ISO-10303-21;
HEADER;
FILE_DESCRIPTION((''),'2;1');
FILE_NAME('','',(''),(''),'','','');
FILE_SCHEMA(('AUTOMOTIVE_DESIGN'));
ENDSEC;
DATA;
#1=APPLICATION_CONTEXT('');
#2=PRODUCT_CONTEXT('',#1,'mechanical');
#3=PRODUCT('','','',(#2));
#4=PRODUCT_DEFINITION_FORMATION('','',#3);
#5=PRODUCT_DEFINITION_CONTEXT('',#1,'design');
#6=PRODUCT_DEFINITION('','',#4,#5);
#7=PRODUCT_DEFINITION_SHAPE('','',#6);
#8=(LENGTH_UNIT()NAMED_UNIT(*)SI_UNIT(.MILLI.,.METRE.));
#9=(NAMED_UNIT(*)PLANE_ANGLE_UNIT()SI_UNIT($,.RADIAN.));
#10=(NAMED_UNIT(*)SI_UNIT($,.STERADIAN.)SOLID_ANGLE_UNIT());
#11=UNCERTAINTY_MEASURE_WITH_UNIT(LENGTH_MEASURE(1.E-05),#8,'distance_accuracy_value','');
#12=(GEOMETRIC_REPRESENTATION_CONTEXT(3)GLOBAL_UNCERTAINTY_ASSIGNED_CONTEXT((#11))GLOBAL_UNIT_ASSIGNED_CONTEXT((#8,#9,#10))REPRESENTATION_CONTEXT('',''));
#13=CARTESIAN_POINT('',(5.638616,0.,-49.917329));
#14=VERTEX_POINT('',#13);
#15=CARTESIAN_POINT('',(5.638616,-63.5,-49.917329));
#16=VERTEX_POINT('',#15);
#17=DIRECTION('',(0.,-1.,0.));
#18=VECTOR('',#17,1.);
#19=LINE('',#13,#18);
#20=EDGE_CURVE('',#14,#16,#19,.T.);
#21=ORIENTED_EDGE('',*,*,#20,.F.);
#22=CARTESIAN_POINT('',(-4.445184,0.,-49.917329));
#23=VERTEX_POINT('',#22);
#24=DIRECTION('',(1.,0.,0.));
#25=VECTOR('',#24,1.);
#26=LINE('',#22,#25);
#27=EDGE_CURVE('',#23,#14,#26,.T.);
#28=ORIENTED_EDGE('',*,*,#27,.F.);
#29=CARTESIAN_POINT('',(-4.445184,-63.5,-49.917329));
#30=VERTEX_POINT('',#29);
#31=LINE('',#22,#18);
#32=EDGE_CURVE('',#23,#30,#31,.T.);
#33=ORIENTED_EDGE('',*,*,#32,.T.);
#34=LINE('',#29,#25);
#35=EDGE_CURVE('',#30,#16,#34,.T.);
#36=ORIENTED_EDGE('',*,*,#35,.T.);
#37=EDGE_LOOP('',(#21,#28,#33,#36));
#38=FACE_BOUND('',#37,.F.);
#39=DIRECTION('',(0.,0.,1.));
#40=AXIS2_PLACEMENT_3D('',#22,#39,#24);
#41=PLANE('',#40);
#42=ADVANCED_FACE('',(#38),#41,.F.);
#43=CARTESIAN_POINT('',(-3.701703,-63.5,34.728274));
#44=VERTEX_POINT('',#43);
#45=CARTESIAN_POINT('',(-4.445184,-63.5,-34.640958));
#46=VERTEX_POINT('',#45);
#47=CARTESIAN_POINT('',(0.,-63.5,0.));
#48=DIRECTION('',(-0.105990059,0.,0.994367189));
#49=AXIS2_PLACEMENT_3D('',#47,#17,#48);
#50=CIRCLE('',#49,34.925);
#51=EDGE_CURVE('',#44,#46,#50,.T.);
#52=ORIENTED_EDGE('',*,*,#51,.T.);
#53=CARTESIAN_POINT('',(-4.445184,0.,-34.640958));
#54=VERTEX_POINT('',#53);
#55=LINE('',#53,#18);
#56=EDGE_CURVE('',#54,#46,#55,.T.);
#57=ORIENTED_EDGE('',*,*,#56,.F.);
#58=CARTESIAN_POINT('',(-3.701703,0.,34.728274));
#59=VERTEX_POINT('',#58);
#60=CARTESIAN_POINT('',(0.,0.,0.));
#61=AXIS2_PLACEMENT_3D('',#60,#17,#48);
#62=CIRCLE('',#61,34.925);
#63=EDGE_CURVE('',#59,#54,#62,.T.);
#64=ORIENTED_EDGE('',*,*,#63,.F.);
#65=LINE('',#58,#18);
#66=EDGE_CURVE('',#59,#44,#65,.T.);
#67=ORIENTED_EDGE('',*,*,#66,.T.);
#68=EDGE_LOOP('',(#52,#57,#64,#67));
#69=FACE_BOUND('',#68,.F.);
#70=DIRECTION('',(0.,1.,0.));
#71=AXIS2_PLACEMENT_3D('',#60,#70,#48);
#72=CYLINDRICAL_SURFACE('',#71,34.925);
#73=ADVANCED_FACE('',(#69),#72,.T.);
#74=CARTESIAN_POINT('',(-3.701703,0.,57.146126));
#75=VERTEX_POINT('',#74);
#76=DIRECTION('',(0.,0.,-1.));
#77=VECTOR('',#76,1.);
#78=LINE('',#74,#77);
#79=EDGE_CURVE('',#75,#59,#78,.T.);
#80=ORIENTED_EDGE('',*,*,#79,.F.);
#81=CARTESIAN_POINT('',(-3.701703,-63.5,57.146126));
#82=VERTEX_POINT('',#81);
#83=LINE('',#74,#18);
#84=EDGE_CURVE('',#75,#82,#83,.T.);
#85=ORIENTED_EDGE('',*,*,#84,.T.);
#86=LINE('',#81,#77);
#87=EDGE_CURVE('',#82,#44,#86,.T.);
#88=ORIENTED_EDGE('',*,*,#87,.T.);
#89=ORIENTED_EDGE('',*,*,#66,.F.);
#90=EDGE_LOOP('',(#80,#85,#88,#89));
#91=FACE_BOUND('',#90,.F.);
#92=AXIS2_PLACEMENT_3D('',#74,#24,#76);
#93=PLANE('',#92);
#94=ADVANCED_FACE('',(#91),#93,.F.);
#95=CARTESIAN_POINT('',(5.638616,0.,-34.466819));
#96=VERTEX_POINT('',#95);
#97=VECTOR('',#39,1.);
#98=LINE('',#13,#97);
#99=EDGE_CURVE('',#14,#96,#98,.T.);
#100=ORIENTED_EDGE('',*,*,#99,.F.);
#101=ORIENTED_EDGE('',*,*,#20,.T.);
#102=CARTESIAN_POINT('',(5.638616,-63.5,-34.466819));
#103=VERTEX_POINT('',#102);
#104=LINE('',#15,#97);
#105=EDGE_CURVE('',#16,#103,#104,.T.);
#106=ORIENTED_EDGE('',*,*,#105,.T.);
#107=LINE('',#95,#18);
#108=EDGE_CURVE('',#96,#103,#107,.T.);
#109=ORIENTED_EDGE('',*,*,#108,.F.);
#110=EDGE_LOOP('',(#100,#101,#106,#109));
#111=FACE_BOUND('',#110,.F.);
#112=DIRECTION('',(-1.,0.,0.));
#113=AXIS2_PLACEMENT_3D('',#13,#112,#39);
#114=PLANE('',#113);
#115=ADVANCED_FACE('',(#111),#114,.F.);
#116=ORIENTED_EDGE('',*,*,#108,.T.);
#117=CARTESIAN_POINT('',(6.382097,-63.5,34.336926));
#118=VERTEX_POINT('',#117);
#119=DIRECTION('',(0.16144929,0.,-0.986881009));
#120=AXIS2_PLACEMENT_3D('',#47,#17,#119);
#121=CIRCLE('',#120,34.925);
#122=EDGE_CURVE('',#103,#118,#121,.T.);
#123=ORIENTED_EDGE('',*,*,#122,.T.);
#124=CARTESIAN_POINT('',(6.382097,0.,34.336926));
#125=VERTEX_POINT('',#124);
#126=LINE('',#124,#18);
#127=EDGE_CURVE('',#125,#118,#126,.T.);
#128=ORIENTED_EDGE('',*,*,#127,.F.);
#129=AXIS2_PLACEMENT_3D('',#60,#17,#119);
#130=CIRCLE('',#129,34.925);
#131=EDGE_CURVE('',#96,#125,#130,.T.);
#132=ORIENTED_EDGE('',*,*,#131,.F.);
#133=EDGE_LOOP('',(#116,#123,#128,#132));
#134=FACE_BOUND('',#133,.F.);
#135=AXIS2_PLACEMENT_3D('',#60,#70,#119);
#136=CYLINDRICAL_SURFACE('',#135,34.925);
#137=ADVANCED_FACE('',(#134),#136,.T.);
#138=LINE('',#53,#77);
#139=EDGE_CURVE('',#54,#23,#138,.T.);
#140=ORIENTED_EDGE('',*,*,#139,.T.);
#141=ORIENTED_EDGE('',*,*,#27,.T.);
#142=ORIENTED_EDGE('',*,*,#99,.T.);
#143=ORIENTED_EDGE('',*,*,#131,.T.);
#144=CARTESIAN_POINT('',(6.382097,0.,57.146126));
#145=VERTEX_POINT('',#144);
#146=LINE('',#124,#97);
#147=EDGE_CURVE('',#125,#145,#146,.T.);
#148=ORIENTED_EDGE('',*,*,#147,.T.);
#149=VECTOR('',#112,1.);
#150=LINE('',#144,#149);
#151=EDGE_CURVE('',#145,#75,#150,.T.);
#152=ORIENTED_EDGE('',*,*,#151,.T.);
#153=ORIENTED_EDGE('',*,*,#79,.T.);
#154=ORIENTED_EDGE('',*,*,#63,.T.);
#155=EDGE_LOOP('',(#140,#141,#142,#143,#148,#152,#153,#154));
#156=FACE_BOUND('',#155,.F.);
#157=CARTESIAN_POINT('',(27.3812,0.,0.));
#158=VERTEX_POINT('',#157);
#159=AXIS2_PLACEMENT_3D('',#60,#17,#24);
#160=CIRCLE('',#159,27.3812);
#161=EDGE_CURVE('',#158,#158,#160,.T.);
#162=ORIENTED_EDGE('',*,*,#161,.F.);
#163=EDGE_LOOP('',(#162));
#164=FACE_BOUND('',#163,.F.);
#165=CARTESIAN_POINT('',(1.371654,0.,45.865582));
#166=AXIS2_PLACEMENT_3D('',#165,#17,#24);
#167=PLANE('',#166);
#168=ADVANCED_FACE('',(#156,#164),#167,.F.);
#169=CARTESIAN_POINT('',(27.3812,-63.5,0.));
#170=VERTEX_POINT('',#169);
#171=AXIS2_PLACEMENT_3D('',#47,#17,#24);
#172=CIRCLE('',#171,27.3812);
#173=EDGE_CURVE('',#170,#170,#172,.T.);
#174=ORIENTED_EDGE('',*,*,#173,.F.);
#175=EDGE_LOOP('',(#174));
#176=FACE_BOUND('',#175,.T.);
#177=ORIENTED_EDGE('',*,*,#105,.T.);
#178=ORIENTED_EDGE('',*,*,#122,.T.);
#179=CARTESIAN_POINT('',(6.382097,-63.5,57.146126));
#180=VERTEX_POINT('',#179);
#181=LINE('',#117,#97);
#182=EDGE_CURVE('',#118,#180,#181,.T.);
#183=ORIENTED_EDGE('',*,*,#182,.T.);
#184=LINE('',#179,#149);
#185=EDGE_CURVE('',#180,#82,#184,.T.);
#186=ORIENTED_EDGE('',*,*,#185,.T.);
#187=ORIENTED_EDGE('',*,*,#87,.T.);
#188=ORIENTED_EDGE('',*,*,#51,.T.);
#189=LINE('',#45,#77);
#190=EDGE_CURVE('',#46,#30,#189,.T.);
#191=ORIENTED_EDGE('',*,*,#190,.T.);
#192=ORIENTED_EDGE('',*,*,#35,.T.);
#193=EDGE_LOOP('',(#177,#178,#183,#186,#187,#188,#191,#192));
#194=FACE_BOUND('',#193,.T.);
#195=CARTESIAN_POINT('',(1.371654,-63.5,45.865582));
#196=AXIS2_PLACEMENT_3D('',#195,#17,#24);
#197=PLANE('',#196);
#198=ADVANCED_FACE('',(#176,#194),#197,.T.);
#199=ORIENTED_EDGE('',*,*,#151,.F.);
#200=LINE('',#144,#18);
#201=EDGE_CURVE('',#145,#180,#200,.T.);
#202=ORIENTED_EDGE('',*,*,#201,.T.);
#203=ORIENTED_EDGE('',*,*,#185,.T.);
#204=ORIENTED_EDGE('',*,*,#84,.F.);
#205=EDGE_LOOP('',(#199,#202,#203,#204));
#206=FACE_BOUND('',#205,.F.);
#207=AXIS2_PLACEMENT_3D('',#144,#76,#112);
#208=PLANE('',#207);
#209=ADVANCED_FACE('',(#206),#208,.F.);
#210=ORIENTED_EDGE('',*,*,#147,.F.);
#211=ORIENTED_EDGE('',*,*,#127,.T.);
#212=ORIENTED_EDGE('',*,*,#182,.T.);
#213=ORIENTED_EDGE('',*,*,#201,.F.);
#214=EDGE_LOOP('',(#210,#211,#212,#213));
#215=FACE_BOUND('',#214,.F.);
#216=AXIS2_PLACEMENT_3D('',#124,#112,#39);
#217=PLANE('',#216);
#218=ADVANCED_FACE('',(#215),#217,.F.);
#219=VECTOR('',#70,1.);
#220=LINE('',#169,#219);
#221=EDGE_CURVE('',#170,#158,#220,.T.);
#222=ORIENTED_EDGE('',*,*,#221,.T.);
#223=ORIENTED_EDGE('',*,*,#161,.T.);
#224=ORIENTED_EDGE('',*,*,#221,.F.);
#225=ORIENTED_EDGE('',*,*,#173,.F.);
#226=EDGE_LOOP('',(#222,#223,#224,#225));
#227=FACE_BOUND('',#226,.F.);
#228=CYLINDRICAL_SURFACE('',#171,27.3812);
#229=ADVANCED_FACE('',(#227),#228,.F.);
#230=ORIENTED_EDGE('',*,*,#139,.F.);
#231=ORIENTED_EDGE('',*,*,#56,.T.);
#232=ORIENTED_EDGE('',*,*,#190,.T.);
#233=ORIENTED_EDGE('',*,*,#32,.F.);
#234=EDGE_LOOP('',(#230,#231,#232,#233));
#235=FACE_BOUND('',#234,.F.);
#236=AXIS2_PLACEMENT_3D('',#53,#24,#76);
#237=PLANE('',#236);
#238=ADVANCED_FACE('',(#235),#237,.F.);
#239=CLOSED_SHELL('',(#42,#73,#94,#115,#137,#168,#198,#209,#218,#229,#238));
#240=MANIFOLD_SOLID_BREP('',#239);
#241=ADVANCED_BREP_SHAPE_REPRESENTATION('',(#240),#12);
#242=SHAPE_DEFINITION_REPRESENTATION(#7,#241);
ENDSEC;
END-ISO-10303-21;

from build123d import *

# Parameters (mm, degrees)
F1_DEPTH = 63.5
F2_R     = 27.3812
F3_DEPTH = 101.6


# Not quite as in the source:
# - a feature names something its author has since deleted; it is built from what else it names


with BuildPart() as f1:
    # F0 (on Front) → F1 (new body)
    with BuildSketch(Plane.XZ):
        with BuildLine():
            ThreePointArc((-3.7017028225, 34.7282740892), (1.3544064685, 34.8987278868), (6.3820971775, 34.3369256139))
            Line((6.3820971775, 34.3369256139), (6.3820971775, 57.1461256139))
            Line((6.3820971775, 57.1461256139), (-3.7017028225, 57.1461256139))
            Line((-3.7017028225, 57.1461256139), (-3.7017028225, 34.7282740892))
        make_face()
        with BuildLine():
            Line((5.6386164435, -49.9173291028), (5.6386164435, -34.4668192557))
            ThreePointArc((5.6386164435, -34.4668192557), (0.6030353105, -34.9197934332), (-4.4451835565, -34.6409579566))
            Line((-4.4451835565, -34.6409579566), (-4.4451835565, -49.9173291028))
            Line((-4.4451835565, -49.9173291028), (5.6386164435, -49.9173291028))
        make_face()
        with BuildLine():
            ThreePointArc((5.6386164435, -34.4668192557), (26.6146980472, -22.6144527428), (34.925, 0))
            ThreePointArc((34.925, 0), (26.8574977327, 22.3255557722), (6.3820971775, 34.3369256139))
            ThreePointArc((6.3820971775, 34.3369256139), (1.3544064685, 34.8987278868), (-3.7017028225, 34.7282740892))
            ThreePointArc((-3.7017028225, 34.7282740892), (-34.9229942598, 0.3742952407), (-4.4451835565, -34.6409579566))
            ThreePointArc((-4.4451835565, -34.6409579566), (0.6030353105, -34.9197934332), (5.6386164435, -34.4668192557))
        make_face()
    extrude(amount=F1_DEPTH)

    # F2 (on face) → F3 (cut)
    with BuildSketch(Plane.XZ.offset(63.5)):
        Circle(F2_R)
    extrude(amount=-F3_DEPTH, mode=Mode.SUBTRACT)


solid = f1.part
